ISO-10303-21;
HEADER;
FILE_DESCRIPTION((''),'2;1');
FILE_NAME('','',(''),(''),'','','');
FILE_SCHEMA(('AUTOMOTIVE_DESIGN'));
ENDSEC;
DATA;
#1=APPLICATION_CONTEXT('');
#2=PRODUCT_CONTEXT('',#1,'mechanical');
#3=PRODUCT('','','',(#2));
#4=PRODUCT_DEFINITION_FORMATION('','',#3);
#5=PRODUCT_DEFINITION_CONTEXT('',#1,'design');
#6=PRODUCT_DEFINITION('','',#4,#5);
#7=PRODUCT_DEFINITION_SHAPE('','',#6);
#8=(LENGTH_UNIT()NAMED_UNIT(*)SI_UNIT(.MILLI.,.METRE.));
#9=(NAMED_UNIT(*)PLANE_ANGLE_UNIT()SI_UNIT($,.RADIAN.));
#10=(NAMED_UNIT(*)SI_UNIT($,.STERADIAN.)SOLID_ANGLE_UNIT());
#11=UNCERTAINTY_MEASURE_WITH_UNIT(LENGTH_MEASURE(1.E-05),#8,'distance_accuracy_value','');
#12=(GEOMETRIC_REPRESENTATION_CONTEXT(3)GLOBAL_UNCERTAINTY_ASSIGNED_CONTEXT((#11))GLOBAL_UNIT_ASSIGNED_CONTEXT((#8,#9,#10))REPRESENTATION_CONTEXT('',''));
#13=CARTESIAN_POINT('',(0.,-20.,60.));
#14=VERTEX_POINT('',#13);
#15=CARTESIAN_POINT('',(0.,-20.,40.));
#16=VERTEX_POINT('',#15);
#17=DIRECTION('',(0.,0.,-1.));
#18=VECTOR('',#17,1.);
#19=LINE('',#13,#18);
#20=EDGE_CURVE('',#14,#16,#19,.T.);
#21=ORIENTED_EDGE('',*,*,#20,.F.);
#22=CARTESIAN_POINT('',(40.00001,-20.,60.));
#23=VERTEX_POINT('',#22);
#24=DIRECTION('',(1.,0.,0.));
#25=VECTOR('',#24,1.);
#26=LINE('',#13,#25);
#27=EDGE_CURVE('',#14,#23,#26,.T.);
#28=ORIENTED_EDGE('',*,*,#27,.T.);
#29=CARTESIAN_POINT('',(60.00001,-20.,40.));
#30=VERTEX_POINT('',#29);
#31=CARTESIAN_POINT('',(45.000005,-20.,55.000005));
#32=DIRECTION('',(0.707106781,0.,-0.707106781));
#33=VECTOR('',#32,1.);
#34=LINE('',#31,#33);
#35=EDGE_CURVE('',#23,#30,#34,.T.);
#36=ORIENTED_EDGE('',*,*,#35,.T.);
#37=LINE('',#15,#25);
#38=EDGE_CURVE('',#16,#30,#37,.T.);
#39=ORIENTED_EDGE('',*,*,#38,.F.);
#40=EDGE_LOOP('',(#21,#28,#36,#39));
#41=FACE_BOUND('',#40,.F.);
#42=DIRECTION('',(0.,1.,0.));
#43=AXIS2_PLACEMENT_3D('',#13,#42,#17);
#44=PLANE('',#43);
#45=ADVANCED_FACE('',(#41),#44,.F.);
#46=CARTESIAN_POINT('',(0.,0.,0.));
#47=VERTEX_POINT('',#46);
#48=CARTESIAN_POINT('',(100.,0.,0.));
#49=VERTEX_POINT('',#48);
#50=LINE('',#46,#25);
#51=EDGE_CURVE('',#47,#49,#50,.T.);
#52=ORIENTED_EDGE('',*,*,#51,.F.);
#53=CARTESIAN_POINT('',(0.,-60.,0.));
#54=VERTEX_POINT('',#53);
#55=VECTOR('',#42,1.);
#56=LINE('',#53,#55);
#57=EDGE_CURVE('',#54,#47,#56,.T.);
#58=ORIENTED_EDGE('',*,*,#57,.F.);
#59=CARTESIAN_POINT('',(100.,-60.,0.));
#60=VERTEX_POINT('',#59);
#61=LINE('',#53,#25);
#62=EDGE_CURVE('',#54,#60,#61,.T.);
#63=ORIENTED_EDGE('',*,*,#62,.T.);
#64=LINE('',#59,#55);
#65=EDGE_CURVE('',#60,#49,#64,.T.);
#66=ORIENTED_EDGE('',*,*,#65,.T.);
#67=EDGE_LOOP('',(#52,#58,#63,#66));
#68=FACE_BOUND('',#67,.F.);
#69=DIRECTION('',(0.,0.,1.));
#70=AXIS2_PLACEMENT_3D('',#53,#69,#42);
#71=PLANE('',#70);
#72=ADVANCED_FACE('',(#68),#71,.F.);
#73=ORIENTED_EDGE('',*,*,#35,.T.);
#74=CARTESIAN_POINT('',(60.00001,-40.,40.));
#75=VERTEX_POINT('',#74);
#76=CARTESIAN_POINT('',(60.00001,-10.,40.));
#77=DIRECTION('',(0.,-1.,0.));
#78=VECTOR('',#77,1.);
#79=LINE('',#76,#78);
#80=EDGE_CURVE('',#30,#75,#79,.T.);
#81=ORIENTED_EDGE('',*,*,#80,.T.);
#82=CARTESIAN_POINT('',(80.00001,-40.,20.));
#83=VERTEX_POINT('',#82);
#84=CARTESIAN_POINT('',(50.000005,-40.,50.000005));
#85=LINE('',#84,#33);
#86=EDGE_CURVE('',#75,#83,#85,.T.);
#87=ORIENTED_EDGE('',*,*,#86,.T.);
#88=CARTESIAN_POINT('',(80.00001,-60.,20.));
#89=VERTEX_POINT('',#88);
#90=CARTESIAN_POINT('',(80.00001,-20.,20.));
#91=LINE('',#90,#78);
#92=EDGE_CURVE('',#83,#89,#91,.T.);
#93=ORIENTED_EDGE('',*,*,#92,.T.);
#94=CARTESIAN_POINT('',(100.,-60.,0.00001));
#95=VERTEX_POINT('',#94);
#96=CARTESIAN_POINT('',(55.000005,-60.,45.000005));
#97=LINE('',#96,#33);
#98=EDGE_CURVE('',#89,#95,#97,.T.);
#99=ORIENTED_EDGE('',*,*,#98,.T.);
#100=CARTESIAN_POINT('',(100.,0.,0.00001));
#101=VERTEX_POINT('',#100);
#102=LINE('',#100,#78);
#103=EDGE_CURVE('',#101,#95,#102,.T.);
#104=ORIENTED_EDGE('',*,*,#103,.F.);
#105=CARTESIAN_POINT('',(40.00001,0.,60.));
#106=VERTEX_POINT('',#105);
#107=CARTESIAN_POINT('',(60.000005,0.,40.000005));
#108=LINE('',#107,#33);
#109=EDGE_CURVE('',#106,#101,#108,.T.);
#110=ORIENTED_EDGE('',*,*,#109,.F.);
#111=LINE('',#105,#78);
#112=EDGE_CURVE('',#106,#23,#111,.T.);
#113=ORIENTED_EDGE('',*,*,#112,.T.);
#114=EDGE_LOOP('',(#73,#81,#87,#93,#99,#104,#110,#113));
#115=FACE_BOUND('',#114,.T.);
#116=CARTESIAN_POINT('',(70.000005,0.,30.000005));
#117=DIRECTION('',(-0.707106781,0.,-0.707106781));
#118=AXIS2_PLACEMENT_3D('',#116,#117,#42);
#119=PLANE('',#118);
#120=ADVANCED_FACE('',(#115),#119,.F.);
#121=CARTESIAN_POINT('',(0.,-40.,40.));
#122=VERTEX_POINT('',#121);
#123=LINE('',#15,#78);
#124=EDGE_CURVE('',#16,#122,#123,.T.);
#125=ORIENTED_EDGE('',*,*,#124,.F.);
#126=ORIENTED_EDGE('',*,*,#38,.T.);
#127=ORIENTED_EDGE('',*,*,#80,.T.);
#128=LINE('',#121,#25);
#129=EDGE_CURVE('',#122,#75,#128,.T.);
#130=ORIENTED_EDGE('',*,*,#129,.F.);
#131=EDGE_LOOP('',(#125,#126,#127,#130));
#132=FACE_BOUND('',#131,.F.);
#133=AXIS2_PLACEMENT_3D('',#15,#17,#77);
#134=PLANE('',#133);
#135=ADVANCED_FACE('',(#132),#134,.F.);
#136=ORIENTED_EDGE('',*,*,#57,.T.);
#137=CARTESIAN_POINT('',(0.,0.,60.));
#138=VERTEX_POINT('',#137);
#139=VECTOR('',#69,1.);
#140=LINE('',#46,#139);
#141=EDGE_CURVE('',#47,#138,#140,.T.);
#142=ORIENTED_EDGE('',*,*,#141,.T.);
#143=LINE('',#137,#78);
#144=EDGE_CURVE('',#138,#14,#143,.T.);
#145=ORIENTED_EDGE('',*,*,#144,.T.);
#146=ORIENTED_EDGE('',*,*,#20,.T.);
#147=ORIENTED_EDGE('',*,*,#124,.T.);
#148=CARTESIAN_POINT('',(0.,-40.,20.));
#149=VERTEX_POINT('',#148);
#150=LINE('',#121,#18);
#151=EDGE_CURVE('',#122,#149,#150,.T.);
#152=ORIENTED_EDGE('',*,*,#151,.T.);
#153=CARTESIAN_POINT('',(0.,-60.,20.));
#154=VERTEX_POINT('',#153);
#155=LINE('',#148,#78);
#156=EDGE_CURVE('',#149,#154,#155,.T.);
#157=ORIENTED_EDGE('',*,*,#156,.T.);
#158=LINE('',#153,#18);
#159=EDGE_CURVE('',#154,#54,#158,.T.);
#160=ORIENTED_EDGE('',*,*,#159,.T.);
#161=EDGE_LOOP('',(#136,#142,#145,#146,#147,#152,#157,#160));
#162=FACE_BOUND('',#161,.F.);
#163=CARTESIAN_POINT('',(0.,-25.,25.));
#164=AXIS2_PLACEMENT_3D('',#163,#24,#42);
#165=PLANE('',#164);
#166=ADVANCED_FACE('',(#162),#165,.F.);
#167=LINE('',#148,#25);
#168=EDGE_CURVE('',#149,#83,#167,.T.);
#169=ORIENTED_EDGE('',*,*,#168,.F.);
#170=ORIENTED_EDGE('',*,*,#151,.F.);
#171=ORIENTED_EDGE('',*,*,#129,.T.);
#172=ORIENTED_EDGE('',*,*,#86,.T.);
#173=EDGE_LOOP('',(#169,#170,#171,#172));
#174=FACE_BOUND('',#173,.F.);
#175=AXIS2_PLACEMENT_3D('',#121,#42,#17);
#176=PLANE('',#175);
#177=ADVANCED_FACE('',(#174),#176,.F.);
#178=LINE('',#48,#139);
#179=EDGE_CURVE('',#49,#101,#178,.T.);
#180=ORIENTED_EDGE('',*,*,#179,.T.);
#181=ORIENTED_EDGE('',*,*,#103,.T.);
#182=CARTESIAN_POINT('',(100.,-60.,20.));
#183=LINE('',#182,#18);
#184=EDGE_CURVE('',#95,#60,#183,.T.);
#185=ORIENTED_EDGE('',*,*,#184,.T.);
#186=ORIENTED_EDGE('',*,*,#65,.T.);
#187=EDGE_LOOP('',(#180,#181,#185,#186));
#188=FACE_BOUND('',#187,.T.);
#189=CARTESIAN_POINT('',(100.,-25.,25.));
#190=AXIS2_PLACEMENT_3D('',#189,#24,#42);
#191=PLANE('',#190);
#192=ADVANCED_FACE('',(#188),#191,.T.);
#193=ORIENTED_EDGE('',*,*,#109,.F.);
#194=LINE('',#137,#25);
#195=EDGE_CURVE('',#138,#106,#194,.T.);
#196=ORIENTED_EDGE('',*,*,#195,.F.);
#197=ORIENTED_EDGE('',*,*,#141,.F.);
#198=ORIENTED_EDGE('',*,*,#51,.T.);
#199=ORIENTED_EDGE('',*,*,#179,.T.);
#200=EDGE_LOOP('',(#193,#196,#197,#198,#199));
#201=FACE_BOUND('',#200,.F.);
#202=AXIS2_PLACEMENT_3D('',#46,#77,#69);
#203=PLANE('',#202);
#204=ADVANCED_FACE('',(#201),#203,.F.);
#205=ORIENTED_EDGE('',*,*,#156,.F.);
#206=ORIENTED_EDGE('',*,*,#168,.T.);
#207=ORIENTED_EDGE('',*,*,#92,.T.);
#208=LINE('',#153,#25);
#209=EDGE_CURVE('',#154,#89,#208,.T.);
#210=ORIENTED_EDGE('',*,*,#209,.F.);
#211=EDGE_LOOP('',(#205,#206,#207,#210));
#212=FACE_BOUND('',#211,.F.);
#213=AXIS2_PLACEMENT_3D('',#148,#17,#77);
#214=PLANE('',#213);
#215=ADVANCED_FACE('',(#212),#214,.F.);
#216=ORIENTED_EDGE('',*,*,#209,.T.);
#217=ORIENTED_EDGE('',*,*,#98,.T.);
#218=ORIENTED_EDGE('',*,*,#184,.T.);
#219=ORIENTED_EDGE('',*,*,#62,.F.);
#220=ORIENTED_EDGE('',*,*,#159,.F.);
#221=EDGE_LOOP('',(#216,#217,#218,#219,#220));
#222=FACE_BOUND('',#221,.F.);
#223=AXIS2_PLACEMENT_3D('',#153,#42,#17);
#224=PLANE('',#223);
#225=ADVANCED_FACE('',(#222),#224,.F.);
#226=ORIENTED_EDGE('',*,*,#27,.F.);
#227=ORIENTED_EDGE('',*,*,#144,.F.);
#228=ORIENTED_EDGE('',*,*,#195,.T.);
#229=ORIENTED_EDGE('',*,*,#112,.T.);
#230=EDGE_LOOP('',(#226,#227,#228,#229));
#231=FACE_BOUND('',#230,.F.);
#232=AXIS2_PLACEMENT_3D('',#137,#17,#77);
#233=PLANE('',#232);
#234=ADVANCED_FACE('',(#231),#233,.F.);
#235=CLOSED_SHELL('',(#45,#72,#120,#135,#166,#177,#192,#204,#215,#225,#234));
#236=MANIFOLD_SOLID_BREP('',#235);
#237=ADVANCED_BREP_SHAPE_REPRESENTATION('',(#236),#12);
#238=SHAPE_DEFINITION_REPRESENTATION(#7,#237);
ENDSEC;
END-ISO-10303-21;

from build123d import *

# Parameters (mm, degrees)
F1_DEPTH = 100
F2_SIZE2 = 59.99999
F2_SIZE  = 59.99999


# Not quite as in the source:
# - a fillet or chamfer is up to 0.001 mm smaller than in the source, because OpenCascade refuses the exact size


with BuildPart() as f1:
    # F0 (on Right) → F1 (new body)
    with BuildSketch(Plane.YZ):
        Polygon((-60, 0), (0, 0), (0, 60), (-20, 60), (-20, 40), (-40, 40), (-40, 20), (-60, 20), align=None)
    extrude(amount=F1_DEPTH)

    # F2 (size 60 and 60 in the source; OpenCascade refuses exactly that, so slightly less here)
    f2_edges = [f1.edges().sort_by_distance(p)[0] for p in [
        (100, -10, 60),
    ]]
    chamfer(f2_edges, length=F2_SIZE, length2=F2_SIZE2)


solid = f1.part
